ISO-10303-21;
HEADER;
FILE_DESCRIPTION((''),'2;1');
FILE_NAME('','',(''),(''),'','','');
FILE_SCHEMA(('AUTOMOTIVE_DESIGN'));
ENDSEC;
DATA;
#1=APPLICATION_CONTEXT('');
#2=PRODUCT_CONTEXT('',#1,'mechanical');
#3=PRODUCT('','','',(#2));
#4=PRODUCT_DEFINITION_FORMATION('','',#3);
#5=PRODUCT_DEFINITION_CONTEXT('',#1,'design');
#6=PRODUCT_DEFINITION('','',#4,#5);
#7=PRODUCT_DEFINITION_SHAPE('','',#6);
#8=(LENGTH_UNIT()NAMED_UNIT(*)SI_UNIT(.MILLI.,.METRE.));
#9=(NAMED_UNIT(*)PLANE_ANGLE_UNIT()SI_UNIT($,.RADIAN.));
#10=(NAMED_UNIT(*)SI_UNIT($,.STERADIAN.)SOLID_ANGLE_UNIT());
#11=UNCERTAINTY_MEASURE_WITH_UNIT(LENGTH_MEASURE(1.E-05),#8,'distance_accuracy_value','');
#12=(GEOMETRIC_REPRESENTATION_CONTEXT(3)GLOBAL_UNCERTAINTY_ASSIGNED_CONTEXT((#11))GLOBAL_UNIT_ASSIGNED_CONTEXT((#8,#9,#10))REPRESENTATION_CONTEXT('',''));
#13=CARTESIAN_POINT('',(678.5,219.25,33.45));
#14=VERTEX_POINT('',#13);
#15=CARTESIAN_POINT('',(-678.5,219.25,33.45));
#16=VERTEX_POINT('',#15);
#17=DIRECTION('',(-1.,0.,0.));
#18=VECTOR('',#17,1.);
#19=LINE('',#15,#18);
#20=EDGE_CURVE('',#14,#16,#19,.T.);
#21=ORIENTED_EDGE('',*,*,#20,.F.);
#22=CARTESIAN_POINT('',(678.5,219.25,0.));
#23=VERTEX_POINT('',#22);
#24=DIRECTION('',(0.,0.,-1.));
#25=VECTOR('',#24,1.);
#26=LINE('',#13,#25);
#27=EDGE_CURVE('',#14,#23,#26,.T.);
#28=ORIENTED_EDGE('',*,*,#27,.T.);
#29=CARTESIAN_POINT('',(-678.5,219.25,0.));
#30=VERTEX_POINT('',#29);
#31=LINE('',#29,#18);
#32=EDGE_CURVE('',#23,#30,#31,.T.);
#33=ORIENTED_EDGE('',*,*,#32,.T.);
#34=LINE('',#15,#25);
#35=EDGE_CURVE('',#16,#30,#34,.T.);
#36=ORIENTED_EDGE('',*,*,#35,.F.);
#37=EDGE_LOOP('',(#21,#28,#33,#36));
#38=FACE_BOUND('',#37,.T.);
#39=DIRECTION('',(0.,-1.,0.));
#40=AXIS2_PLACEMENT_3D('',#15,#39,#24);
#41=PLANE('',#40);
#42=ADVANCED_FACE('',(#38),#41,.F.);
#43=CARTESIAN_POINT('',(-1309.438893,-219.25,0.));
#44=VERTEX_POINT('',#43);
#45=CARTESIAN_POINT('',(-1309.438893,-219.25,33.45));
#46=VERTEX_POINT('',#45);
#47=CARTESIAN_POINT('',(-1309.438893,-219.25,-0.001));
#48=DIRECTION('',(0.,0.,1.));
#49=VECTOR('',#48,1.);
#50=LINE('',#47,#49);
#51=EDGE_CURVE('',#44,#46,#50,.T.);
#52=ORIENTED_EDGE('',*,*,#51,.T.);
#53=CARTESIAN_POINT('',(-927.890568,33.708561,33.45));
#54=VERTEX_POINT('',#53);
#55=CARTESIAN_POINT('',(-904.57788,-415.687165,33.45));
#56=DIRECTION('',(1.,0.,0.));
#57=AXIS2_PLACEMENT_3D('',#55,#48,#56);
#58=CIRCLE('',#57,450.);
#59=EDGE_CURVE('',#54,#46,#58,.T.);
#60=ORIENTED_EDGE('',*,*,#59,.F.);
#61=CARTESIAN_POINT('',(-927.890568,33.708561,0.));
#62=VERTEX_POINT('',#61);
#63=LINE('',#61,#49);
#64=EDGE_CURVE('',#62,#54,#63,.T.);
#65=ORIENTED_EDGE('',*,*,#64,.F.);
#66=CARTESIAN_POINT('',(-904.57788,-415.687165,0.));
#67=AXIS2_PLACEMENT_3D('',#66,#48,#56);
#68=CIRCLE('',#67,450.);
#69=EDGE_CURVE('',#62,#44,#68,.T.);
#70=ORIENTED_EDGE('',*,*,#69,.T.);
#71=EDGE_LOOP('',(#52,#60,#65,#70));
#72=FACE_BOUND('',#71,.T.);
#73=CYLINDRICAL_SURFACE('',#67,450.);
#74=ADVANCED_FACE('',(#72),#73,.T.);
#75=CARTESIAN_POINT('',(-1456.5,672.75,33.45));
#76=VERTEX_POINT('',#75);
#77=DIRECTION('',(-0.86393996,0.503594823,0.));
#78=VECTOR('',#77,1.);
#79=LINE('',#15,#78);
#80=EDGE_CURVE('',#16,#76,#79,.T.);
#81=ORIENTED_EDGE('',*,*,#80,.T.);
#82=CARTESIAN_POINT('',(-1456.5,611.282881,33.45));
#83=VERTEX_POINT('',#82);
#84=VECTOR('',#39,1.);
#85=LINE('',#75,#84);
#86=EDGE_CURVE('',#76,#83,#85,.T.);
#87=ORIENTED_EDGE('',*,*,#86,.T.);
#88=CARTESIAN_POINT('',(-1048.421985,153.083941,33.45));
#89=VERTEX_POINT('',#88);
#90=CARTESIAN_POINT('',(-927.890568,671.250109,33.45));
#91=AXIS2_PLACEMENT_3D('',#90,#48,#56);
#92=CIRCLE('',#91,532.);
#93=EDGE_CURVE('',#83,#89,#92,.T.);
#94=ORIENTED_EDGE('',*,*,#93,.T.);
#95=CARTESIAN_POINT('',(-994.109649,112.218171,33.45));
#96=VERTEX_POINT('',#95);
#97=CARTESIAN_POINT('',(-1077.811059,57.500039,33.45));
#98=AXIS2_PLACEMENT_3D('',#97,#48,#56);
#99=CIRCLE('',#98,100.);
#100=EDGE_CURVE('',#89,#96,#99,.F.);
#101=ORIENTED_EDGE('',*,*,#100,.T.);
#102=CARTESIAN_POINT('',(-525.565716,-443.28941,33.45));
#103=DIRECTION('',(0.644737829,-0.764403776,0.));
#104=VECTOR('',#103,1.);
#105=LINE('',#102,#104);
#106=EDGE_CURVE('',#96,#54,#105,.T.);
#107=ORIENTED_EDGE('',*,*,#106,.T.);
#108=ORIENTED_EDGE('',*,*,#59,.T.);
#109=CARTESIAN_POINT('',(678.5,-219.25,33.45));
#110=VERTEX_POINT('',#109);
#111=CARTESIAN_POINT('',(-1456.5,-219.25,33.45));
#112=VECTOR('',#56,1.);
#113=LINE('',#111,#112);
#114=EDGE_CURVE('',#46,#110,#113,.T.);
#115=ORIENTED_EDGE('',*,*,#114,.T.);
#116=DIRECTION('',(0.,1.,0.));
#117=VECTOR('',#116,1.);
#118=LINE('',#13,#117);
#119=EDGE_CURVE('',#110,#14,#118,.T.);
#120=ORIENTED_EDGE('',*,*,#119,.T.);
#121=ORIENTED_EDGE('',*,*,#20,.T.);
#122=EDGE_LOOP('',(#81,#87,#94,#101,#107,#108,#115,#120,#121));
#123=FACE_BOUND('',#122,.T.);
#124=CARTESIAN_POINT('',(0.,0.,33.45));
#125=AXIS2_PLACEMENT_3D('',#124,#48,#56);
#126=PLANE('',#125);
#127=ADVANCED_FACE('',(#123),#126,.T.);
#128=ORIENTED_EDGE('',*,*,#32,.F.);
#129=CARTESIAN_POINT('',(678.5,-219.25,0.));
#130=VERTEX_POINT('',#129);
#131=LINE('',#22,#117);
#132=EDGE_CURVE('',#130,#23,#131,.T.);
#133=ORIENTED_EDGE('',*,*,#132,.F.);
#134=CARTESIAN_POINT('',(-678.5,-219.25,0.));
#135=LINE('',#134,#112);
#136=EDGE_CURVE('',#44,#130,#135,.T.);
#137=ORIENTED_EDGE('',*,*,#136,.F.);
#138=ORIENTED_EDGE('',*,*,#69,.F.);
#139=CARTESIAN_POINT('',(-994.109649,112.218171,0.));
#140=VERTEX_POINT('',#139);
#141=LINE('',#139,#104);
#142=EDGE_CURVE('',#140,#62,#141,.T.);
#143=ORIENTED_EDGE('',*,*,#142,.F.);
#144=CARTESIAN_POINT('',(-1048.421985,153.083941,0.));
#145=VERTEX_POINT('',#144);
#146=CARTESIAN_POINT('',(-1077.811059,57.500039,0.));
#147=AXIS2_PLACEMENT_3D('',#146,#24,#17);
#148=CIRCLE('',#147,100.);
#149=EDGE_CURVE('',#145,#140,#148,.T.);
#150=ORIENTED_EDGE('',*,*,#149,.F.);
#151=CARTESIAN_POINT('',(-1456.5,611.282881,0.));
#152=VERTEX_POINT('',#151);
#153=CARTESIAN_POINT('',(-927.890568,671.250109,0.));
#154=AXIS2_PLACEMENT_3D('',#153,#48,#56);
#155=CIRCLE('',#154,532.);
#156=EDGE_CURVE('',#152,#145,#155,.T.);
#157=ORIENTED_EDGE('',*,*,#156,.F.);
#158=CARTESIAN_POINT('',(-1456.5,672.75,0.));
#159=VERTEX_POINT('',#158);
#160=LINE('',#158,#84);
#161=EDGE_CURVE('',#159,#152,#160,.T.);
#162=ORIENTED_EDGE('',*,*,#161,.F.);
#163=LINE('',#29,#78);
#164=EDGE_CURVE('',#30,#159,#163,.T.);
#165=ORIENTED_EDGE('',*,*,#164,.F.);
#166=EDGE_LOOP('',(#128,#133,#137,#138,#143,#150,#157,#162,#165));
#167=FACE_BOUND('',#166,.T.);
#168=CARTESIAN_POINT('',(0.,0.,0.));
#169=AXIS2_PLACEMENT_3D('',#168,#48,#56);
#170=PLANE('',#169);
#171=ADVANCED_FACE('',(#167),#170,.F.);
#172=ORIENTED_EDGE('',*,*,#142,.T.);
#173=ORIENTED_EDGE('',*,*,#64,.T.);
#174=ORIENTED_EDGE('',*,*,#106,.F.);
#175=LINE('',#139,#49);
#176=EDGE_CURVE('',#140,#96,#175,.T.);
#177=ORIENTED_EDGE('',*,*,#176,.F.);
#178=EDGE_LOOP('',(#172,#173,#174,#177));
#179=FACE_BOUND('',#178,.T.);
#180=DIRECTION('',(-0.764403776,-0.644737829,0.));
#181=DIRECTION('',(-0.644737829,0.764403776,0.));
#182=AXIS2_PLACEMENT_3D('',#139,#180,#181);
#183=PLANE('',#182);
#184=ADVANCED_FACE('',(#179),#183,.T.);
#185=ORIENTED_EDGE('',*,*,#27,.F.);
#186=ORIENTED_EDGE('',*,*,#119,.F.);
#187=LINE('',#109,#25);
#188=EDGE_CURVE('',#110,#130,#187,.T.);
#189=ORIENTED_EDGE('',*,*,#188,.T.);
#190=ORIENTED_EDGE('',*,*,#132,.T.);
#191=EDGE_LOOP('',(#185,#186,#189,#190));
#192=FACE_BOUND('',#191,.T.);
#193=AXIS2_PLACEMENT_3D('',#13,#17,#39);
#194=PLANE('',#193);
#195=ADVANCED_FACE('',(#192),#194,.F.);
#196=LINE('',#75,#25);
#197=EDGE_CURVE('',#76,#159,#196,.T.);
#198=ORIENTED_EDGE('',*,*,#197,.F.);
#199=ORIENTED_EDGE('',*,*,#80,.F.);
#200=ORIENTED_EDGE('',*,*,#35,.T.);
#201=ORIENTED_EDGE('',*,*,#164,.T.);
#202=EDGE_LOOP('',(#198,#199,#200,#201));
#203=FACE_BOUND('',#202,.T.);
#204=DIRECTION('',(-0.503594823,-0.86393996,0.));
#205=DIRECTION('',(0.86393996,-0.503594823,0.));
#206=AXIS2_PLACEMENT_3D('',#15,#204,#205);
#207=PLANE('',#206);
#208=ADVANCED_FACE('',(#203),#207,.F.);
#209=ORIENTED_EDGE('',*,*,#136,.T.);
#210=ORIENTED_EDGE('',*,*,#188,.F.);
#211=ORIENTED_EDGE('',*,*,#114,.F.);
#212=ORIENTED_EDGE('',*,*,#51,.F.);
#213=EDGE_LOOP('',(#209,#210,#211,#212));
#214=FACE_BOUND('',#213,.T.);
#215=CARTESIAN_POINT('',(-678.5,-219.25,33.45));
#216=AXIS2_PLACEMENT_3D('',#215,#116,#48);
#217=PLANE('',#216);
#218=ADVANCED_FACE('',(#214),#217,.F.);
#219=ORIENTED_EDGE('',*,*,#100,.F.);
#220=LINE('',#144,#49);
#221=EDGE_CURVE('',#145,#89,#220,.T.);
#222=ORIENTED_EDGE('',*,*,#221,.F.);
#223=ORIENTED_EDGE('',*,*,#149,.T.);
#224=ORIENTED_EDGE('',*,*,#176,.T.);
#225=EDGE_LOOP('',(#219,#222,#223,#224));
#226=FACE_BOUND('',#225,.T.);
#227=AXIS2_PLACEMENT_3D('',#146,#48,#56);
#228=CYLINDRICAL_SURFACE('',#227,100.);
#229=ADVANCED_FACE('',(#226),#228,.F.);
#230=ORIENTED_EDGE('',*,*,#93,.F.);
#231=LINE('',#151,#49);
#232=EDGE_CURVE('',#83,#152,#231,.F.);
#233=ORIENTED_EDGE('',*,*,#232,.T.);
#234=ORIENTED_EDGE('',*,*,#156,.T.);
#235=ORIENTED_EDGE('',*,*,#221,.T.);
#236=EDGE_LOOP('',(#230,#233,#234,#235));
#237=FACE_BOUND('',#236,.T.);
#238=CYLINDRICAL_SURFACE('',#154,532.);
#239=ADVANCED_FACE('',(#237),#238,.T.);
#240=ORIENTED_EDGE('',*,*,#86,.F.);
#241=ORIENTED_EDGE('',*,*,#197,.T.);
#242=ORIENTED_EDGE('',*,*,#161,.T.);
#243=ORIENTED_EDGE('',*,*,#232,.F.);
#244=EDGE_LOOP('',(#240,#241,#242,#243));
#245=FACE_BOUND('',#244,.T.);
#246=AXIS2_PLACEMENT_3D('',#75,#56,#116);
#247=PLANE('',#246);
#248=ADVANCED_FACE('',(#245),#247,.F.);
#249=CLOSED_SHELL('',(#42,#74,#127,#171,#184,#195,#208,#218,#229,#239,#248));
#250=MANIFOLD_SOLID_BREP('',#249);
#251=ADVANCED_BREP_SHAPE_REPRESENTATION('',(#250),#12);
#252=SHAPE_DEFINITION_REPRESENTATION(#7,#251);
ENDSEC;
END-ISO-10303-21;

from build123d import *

# Parameters (mm, degrees)
BOSS_EXTRUDE1_DEPTH = 33.45
CAVITY3_DEPTH       = 33.45
CUT_EXTRUDE2_REACH  = 1606.713


# Read off the part's stored shape, not the designer's step: Cavity3
with BuildPart() as part:
    # Sketch1 → Boss-Extrude1 (new body)
    with BuildSketch(Plane.XY):
        Polygon((-678.5, 219.25), (-1456.5, 672.75), (-1456.5, -219.25), (-678.5, -219.25), (678.5, -219.25), (678.5, 219.25), align=None)
    extrude(amount=BOSS_EXTRUDE1_DEPTH)

    # Cavity3 outline → Cavity3 (cut)
    with BuildSketch(Plane.XY):
        with BuildLine():
            Line((-1456.5, -202.506493086), (-1300.878272365, -202.506493086))
            ThreePointArc((-1300.878272365, -202.506493086), (-1145.343683701, -35.513747144), (-927.890567992, 33.708560944))
            Line((-927.890567992, 33.708560944), (-994.109648548, 112.218170508))
            ThreePointArc((-994.109648548, 112.218170508), (-1017.687293376, 137.407064936), (-1048.421985466, 153.083940911))
            ThreePointArc((-1048.421985466, 153.083940911), (-1325.171989397, 317.426039094), (-1456.5, 611.282881012))
            Line((-1456.5, 611.282881012), (-1456.5, -202.506493086))
        make_face()
    extrude(amount=CAVITY3_DEPTH, mode=Mode.SUBTRACT)

    # Sketch6 → Cut-Extrude2 (cut, up to next)
    with BuildSketch(Plane.XY.offset(33.45), mode=Mode.PRIVATE) as cut_extrude2_sk1:
        with BuildLine():
            Line((-1300.878272365, -202.506493086), (-1456.5, -202.506493086))
            Line((-1456.5, -202.506493086), (-1456.5, -219.25))
            Line((-1456.5, -219.25), (-1309.43889328, -219.25))
            ThreePointArc((-1309.43889328, -219.25), (-1305.246054091, -210.833524229), (-1300.878272365, -202.506493086))
        make_face()
    cut_extrude2_tool1 = extrude(cut_extrude2_sk1.sketch, amount=-CUT_EXTRUDE2_REACH, mode=Mode.PRIVATE) & part.part
    add(cut_extrude2_tool1.solids().sort_by_distance((-1380.845886, -210.799292, 33.45))[0], mode=Mode.SUBTRACT)


solid = part.part
